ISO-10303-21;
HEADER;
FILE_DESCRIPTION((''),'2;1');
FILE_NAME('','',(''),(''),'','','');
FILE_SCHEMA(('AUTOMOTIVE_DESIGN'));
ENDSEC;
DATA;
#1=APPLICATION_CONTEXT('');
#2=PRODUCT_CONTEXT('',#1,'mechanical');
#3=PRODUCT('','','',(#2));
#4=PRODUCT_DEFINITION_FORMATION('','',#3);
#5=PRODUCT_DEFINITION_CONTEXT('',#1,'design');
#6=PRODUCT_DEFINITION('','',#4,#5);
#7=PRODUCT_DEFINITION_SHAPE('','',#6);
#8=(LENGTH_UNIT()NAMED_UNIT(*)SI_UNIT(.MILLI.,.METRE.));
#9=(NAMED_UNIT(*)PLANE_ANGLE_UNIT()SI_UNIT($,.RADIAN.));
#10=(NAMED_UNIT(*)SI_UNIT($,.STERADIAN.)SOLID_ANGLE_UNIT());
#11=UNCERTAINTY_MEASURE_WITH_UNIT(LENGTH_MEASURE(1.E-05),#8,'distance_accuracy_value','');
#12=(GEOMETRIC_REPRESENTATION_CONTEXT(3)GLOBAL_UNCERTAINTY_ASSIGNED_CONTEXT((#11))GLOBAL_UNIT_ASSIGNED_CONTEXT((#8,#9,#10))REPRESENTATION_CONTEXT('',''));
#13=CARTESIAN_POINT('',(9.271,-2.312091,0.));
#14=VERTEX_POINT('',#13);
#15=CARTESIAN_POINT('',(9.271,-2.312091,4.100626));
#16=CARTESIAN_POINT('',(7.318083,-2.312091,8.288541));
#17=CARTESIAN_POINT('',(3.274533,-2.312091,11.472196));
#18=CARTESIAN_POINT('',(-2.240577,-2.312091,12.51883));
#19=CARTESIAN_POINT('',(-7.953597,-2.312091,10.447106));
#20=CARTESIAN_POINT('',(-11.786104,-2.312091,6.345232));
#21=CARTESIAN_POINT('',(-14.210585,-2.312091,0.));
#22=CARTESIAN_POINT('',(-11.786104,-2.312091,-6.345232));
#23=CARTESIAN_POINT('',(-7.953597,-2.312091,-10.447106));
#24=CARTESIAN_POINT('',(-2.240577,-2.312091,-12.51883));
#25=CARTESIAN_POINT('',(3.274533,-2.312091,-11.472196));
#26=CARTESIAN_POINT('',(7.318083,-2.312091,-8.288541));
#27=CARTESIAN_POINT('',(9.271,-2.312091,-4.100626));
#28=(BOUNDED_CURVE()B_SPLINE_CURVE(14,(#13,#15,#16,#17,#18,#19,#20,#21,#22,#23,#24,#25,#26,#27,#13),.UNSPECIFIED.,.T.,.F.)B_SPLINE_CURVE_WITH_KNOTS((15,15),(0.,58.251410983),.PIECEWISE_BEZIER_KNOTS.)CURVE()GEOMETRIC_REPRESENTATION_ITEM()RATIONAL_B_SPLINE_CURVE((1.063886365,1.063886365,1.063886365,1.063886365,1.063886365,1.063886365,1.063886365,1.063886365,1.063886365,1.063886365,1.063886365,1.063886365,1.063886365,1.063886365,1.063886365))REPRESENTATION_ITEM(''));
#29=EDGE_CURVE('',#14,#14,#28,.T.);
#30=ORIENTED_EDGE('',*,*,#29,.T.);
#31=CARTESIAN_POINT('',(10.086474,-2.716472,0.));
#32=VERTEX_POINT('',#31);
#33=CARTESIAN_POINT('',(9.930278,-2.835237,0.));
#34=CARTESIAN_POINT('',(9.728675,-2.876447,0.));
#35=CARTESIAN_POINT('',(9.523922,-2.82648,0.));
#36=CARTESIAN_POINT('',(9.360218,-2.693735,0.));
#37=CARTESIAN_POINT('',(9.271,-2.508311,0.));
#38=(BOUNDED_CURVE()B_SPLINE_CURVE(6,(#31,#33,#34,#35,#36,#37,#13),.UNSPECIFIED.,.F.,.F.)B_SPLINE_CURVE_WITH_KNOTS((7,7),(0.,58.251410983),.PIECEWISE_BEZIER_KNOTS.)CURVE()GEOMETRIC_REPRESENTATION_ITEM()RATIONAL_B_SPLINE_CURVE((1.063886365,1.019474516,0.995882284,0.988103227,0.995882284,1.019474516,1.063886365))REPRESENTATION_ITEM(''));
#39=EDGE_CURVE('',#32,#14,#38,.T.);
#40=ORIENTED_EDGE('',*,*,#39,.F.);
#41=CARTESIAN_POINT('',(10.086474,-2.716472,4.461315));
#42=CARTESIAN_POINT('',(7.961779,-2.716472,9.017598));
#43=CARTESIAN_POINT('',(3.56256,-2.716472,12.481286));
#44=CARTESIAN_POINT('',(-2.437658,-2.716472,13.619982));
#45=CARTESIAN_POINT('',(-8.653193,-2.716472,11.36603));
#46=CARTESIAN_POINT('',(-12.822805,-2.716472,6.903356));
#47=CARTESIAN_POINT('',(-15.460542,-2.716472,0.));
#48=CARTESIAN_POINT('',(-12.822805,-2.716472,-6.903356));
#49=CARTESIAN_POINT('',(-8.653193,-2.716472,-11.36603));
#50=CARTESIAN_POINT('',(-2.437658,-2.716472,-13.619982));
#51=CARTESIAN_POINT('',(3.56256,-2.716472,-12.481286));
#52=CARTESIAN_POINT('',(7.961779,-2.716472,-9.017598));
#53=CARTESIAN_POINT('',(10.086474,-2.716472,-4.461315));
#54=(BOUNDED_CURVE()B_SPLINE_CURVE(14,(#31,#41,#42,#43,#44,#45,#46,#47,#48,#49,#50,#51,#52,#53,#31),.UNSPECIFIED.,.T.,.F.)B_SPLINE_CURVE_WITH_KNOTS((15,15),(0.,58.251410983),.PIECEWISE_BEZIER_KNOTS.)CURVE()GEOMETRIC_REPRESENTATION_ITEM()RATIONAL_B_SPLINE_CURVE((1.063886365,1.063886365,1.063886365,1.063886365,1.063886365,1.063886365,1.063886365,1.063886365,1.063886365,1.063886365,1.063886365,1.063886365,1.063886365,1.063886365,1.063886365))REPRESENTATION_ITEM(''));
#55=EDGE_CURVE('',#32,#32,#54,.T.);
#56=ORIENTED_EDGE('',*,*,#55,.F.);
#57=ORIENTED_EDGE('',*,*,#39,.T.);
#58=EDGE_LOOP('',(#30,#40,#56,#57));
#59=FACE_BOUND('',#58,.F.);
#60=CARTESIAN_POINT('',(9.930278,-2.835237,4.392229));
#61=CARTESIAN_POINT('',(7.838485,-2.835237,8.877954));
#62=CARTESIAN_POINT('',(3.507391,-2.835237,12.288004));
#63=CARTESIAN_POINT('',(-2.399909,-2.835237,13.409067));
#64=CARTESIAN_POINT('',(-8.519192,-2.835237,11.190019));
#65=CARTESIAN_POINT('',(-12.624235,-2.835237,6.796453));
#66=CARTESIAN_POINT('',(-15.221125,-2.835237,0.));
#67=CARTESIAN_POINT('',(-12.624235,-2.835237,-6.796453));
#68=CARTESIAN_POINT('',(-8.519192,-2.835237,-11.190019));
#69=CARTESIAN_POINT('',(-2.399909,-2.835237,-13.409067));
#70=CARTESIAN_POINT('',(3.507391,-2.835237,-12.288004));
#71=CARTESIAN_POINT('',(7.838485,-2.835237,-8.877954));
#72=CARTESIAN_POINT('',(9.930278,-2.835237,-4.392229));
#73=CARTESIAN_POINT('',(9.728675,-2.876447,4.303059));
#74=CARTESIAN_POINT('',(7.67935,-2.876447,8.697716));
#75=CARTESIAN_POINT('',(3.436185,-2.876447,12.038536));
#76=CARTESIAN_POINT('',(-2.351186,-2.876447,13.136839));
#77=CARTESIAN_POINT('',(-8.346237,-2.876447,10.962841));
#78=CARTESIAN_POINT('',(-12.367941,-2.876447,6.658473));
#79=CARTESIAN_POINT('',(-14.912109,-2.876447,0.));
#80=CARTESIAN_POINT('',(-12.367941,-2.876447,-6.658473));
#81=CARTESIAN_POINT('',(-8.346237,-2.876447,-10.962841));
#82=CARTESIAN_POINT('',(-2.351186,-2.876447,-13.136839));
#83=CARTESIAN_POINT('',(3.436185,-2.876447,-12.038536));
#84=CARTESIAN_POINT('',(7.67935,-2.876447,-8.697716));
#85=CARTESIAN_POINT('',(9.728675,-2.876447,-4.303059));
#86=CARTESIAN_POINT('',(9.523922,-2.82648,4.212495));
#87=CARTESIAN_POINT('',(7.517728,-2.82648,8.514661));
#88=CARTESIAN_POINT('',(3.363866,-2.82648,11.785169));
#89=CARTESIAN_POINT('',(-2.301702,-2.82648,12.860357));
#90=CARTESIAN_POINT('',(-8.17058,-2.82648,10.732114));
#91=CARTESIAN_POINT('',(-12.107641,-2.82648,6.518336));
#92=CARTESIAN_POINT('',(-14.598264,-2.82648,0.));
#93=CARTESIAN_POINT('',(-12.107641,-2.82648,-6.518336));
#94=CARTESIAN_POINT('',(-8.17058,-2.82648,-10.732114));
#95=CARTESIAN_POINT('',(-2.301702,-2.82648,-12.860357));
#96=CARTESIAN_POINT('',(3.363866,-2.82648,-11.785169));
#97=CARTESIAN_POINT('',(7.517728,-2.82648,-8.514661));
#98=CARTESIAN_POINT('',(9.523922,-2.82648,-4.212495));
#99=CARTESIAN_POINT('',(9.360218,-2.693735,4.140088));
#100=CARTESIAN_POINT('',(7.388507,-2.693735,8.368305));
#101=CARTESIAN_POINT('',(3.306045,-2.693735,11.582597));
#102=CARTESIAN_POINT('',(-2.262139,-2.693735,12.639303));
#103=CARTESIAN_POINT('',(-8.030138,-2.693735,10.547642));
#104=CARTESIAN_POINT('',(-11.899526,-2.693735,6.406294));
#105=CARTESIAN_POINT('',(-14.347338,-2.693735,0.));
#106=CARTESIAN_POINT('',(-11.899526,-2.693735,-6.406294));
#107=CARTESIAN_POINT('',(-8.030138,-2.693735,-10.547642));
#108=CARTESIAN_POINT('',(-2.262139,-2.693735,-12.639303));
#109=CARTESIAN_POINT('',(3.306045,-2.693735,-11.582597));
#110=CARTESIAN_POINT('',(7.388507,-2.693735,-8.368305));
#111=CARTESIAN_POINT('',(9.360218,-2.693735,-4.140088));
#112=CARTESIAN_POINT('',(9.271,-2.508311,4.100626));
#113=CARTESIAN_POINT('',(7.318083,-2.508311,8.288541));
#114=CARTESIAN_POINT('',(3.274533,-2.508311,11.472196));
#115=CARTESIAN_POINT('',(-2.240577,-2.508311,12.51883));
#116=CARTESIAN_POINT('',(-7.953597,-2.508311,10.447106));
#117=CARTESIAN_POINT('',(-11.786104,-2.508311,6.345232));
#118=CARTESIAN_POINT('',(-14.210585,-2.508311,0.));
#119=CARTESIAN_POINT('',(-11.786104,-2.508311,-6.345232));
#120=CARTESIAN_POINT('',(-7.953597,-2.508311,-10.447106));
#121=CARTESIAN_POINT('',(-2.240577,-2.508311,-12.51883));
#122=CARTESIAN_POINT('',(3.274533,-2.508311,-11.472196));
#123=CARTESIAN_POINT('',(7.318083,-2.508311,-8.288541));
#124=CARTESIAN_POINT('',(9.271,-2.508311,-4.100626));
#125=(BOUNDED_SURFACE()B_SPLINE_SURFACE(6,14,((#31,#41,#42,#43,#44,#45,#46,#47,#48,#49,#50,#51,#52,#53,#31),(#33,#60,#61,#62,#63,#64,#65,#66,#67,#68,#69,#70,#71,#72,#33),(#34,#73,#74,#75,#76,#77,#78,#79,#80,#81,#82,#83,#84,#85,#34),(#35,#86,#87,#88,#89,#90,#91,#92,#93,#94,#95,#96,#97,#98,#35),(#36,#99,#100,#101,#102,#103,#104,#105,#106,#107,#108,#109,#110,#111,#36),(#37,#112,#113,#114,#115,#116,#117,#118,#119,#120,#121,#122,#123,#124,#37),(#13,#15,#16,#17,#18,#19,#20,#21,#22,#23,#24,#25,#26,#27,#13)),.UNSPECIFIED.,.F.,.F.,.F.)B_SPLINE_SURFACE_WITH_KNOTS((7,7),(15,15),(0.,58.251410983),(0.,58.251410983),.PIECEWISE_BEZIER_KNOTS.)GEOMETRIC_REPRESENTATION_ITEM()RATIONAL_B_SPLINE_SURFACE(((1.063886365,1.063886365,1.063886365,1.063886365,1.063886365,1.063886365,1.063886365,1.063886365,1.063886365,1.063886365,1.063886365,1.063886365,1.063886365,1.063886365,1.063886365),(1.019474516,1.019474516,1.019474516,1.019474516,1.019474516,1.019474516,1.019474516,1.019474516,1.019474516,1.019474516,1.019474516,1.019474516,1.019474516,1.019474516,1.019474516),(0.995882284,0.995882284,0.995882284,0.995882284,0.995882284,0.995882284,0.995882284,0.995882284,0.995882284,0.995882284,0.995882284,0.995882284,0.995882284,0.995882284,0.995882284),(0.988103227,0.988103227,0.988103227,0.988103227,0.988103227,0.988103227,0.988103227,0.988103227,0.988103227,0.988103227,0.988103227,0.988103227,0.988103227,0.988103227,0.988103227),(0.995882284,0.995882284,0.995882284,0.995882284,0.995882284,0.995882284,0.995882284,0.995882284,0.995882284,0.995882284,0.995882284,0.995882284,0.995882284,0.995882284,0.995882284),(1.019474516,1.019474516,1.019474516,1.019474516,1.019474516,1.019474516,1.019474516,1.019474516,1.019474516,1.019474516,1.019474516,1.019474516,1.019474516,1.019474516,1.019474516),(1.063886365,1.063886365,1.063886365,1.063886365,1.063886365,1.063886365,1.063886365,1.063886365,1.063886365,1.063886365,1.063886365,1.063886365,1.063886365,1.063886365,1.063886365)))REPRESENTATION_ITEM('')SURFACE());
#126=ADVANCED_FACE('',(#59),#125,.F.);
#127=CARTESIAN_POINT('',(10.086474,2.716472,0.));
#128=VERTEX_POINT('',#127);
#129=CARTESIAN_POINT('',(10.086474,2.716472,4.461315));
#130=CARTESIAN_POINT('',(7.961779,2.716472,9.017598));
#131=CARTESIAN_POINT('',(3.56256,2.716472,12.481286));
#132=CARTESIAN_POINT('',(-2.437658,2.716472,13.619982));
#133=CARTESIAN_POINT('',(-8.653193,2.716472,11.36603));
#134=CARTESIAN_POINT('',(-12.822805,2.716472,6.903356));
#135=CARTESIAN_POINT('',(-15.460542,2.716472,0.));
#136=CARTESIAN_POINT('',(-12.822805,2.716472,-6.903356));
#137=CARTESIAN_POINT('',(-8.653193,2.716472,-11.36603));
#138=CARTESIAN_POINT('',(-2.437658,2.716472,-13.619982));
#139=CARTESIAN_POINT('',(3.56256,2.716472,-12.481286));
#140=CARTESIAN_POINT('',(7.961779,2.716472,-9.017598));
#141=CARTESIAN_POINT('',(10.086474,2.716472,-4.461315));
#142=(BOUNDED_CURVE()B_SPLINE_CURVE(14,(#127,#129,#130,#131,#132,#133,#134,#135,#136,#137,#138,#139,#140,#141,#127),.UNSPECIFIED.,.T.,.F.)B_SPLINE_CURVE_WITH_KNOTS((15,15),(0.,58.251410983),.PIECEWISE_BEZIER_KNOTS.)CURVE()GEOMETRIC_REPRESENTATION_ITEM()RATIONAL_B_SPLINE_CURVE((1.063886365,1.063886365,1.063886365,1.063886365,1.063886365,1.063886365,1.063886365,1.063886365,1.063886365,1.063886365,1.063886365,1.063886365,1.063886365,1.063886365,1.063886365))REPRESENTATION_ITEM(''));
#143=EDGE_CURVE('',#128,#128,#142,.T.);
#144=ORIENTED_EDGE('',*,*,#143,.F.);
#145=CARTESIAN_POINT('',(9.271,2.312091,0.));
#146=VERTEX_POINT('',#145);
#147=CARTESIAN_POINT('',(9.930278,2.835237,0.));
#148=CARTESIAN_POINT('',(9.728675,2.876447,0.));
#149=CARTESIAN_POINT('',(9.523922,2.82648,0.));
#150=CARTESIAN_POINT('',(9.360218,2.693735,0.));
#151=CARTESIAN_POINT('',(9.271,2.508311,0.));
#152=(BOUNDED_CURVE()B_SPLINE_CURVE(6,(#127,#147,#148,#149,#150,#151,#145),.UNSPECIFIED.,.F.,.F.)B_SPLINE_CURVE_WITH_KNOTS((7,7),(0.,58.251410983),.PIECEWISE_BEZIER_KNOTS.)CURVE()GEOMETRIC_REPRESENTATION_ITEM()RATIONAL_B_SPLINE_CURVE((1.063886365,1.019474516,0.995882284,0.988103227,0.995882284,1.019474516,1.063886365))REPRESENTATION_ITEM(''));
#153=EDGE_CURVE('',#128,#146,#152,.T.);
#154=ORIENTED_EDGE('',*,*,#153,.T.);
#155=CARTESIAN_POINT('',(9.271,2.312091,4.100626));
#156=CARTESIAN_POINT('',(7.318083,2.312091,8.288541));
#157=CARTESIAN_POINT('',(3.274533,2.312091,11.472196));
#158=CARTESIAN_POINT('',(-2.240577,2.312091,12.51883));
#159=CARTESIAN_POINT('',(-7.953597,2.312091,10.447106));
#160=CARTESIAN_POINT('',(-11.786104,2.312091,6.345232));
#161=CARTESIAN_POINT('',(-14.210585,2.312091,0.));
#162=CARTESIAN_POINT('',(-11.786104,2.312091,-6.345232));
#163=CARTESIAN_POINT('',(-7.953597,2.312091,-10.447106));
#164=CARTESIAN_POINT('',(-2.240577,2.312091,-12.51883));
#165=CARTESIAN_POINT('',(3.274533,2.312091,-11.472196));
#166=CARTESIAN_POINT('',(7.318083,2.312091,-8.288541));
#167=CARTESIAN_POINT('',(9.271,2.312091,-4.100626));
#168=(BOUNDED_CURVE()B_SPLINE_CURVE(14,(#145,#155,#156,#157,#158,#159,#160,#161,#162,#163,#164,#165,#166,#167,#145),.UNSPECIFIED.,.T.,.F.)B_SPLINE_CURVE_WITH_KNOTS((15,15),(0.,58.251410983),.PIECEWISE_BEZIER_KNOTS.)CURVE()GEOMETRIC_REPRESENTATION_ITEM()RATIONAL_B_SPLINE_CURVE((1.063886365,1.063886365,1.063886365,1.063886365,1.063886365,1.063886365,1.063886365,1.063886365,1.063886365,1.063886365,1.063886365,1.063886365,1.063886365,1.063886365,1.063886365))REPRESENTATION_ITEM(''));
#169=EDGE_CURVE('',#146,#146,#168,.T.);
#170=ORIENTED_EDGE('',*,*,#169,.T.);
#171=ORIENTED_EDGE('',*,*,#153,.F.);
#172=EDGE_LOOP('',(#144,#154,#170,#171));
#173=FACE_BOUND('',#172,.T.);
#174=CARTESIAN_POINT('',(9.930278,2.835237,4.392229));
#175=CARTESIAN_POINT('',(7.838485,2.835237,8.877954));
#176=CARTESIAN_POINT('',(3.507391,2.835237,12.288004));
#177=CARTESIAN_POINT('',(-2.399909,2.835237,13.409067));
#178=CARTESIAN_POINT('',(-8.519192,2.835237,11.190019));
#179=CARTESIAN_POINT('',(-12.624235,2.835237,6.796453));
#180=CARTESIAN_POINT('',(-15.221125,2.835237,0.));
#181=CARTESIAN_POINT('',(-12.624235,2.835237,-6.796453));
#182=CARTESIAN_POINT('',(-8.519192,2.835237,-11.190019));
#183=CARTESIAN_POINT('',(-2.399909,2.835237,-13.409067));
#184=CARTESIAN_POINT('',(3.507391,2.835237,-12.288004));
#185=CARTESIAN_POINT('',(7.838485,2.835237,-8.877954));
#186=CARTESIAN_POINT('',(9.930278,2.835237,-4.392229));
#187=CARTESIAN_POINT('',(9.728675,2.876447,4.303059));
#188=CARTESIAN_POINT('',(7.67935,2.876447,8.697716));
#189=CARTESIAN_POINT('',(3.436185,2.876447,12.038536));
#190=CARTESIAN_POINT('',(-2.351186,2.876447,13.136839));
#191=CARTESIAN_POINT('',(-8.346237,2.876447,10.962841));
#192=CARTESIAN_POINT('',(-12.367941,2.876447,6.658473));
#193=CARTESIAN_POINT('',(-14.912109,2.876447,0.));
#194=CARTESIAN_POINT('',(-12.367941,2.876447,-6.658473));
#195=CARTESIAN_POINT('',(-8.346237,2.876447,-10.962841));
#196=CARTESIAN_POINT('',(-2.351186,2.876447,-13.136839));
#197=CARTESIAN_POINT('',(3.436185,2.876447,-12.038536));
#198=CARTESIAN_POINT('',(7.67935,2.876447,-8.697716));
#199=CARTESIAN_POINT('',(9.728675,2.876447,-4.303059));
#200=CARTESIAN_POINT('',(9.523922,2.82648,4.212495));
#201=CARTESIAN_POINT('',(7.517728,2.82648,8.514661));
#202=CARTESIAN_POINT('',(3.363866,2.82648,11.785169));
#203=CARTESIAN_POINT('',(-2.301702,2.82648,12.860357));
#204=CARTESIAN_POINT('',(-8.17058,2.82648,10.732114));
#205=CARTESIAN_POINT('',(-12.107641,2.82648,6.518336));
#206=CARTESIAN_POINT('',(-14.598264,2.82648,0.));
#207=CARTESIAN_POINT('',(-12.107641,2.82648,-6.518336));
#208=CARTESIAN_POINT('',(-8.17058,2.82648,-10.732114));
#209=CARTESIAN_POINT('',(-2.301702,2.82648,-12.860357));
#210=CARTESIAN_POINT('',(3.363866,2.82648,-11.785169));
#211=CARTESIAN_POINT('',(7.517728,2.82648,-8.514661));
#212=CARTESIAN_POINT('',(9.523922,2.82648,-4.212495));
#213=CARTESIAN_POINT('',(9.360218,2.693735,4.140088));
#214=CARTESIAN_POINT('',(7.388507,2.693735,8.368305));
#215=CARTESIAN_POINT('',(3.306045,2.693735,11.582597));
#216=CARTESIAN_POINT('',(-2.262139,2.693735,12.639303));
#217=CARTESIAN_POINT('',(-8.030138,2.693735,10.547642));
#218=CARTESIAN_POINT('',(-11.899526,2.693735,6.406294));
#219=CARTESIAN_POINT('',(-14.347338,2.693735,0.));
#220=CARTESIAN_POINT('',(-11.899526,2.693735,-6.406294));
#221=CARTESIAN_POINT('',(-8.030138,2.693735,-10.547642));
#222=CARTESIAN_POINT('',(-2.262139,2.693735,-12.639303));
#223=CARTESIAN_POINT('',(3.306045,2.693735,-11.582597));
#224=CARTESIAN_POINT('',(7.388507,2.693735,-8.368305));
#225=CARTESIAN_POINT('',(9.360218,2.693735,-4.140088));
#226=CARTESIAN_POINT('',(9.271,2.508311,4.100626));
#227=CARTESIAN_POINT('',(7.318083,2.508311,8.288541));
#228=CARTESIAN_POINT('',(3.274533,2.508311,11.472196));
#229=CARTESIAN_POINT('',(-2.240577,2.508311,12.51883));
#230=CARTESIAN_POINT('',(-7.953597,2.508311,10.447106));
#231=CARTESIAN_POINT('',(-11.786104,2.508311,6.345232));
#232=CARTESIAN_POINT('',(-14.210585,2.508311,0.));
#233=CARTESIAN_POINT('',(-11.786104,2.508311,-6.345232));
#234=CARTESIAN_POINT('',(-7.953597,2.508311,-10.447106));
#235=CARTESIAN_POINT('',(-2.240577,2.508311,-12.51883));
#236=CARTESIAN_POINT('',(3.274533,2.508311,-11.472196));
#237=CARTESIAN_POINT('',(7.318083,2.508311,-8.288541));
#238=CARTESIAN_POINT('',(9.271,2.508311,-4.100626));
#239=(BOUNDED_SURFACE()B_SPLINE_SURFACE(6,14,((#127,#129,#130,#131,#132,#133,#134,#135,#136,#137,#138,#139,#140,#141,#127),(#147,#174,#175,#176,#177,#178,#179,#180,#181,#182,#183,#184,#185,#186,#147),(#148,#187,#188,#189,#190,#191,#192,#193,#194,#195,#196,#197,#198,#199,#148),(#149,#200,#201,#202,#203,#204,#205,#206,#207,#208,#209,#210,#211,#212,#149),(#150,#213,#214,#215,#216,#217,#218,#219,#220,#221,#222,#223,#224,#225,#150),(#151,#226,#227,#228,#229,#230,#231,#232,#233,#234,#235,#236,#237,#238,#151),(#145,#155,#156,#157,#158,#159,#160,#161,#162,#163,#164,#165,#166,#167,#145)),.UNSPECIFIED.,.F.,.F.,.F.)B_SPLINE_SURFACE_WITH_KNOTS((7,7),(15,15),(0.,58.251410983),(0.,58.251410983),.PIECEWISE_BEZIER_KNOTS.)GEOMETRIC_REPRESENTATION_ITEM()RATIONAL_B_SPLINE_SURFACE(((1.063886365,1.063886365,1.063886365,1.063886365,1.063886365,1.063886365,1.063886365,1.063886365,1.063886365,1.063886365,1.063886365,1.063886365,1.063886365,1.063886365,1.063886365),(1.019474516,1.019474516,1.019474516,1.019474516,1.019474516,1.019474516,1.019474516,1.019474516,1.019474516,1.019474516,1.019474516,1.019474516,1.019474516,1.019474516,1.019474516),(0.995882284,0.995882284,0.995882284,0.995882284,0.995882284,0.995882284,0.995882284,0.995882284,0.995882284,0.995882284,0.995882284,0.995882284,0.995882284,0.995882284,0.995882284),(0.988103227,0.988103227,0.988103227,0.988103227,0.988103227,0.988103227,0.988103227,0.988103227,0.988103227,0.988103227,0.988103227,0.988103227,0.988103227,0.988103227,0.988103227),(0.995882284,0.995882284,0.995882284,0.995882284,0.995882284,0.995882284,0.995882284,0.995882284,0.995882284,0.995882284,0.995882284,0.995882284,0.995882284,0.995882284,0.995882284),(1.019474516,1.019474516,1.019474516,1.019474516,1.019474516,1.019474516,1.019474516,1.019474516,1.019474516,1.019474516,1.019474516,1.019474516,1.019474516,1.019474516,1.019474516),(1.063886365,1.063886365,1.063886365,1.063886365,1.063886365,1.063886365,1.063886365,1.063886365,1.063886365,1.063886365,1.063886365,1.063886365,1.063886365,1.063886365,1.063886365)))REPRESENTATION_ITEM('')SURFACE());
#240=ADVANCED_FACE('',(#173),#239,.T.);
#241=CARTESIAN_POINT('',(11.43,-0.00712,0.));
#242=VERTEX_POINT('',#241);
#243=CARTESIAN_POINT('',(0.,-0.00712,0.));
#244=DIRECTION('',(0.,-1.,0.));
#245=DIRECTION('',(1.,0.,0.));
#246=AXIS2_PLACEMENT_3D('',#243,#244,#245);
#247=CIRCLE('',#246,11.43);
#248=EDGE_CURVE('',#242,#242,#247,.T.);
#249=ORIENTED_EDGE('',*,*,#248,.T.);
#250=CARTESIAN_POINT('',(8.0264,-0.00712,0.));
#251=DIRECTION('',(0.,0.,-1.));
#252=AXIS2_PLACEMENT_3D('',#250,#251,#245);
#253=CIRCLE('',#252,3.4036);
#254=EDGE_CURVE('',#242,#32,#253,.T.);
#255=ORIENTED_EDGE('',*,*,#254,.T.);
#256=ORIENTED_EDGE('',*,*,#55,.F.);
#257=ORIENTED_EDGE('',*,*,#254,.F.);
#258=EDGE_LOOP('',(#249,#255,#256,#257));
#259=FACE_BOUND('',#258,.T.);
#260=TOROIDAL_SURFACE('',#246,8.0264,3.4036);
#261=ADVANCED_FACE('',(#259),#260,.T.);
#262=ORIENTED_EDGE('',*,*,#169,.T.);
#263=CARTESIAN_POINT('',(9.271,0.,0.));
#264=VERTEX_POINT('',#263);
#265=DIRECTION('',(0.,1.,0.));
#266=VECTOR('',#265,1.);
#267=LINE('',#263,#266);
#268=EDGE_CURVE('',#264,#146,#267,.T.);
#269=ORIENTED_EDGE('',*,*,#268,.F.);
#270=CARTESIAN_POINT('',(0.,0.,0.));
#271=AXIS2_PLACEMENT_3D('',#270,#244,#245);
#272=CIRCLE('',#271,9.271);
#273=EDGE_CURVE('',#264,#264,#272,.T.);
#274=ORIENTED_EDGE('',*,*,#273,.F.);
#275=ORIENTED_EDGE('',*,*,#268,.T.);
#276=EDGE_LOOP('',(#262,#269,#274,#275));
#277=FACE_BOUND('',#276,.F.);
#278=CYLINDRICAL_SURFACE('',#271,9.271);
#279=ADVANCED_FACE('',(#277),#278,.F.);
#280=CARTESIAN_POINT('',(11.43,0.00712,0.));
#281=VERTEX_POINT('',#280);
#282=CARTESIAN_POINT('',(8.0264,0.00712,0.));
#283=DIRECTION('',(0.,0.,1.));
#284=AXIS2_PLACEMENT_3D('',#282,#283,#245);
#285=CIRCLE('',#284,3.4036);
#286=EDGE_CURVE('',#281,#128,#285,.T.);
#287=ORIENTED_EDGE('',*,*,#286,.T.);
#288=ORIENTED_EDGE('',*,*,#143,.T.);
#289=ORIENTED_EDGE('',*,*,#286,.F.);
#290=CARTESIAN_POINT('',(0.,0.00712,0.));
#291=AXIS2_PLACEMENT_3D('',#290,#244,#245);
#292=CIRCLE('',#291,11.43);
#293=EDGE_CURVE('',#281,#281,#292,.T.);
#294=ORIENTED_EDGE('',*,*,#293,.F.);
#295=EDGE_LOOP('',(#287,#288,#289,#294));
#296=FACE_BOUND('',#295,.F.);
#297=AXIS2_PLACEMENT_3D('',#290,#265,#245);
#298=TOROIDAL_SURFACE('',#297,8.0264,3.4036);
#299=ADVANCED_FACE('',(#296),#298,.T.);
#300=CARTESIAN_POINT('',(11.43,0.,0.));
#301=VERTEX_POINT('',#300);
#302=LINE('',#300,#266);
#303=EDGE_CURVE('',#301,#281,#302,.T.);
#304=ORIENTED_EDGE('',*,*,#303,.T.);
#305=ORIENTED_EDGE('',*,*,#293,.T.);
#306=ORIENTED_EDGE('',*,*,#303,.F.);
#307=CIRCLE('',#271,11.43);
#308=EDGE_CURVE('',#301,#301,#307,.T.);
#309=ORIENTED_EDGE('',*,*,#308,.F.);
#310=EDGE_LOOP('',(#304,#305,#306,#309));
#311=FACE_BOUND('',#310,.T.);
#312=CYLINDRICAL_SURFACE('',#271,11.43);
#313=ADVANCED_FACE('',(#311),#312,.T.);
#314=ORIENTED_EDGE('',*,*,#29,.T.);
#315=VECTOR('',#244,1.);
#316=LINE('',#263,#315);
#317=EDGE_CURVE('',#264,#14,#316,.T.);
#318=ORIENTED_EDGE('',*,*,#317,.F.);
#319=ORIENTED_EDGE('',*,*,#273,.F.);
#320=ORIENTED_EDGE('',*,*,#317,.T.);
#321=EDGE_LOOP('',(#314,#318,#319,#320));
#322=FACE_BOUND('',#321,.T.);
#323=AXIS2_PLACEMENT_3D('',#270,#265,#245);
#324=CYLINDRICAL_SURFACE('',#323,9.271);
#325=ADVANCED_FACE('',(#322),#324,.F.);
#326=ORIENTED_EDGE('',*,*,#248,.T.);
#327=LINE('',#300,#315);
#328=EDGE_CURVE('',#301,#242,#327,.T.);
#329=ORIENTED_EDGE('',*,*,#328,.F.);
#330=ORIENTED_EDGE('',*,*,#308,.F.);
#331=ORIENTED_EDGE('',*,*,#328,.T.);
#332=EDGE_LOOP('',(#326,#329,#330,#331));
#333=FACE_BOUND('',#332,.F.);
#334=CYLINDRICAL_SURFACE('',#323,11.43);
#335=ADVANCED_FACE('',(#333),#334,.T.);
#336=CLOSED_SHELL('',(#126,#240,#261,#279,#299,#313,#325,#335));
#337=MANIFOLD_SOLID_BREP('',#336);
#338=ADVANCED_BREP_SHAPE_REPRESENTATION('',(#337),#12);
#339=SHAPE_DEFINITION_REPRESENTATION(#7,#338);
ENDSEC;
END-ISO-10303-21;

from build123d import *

# Parameters (mm, degrees)
F0_R     = 11.43
F0_R_2   = 9.271
F1_DEPTH = 3.175
F3_R     = 0.508


# Not quite as in the source:
# - a fillet or chamfer that OpenCascade refuses, or shapes differently, is made with other operations: its cross-section is extruded or revolved along the edge and cut away or added


with BuildPart() as f1:
    # F0 (on Front) → F1 (new body)
    with BuildSketch(Plane.XZ):
        Circle(F0_R)
        Circle(F0_R_2, mode=Mode.SUBTRACT)
    extrude(amount=F1_DEPTH)

    # F2: fillet of radius 3.4036 on 1 edges, made by hand

    # F2_s1 → F2_t2 (revolve, cut)
    with BuildSketch(Plane.XY):
        with BuildLine():
            ThreePointArc((11.43, -0.0071199833), (10.8389267572, -1.9239366673), (9.271, -3.175))
            Line((9.271, -3.175), (9.295892, -3.2383576003))
            ThreePointArc((9.295892, -3.2383576003), (10.3505, -3.243072), (11.43, -3.243072))
            Line((11.43, -3.243072), (11.498072, -3.175))
            Line((11.498072, -3.175), (11.498072, -0.0071199833))
            Line((11.498072, -0.0071199833), (11.43, -0.0071199833))
        make_face()
    revolve(axis=Axis((0, -3.175, 0), (0, -1, 0)), mode=Mode.SUBTRACT)

    # F3
    f3_edges = [f1.edges().sort_by_distance(p)[0] for p in [
        (-9.271, -3.175, 0),
    ]]
    fillet(f3_edges, radius=F3_R)

    # F4: F1 across plane


with BuildPart() as f1_1:
    add(f1.part)
    add(f1.part.mirror(Plane.XZ))


solid = f1_1.part
